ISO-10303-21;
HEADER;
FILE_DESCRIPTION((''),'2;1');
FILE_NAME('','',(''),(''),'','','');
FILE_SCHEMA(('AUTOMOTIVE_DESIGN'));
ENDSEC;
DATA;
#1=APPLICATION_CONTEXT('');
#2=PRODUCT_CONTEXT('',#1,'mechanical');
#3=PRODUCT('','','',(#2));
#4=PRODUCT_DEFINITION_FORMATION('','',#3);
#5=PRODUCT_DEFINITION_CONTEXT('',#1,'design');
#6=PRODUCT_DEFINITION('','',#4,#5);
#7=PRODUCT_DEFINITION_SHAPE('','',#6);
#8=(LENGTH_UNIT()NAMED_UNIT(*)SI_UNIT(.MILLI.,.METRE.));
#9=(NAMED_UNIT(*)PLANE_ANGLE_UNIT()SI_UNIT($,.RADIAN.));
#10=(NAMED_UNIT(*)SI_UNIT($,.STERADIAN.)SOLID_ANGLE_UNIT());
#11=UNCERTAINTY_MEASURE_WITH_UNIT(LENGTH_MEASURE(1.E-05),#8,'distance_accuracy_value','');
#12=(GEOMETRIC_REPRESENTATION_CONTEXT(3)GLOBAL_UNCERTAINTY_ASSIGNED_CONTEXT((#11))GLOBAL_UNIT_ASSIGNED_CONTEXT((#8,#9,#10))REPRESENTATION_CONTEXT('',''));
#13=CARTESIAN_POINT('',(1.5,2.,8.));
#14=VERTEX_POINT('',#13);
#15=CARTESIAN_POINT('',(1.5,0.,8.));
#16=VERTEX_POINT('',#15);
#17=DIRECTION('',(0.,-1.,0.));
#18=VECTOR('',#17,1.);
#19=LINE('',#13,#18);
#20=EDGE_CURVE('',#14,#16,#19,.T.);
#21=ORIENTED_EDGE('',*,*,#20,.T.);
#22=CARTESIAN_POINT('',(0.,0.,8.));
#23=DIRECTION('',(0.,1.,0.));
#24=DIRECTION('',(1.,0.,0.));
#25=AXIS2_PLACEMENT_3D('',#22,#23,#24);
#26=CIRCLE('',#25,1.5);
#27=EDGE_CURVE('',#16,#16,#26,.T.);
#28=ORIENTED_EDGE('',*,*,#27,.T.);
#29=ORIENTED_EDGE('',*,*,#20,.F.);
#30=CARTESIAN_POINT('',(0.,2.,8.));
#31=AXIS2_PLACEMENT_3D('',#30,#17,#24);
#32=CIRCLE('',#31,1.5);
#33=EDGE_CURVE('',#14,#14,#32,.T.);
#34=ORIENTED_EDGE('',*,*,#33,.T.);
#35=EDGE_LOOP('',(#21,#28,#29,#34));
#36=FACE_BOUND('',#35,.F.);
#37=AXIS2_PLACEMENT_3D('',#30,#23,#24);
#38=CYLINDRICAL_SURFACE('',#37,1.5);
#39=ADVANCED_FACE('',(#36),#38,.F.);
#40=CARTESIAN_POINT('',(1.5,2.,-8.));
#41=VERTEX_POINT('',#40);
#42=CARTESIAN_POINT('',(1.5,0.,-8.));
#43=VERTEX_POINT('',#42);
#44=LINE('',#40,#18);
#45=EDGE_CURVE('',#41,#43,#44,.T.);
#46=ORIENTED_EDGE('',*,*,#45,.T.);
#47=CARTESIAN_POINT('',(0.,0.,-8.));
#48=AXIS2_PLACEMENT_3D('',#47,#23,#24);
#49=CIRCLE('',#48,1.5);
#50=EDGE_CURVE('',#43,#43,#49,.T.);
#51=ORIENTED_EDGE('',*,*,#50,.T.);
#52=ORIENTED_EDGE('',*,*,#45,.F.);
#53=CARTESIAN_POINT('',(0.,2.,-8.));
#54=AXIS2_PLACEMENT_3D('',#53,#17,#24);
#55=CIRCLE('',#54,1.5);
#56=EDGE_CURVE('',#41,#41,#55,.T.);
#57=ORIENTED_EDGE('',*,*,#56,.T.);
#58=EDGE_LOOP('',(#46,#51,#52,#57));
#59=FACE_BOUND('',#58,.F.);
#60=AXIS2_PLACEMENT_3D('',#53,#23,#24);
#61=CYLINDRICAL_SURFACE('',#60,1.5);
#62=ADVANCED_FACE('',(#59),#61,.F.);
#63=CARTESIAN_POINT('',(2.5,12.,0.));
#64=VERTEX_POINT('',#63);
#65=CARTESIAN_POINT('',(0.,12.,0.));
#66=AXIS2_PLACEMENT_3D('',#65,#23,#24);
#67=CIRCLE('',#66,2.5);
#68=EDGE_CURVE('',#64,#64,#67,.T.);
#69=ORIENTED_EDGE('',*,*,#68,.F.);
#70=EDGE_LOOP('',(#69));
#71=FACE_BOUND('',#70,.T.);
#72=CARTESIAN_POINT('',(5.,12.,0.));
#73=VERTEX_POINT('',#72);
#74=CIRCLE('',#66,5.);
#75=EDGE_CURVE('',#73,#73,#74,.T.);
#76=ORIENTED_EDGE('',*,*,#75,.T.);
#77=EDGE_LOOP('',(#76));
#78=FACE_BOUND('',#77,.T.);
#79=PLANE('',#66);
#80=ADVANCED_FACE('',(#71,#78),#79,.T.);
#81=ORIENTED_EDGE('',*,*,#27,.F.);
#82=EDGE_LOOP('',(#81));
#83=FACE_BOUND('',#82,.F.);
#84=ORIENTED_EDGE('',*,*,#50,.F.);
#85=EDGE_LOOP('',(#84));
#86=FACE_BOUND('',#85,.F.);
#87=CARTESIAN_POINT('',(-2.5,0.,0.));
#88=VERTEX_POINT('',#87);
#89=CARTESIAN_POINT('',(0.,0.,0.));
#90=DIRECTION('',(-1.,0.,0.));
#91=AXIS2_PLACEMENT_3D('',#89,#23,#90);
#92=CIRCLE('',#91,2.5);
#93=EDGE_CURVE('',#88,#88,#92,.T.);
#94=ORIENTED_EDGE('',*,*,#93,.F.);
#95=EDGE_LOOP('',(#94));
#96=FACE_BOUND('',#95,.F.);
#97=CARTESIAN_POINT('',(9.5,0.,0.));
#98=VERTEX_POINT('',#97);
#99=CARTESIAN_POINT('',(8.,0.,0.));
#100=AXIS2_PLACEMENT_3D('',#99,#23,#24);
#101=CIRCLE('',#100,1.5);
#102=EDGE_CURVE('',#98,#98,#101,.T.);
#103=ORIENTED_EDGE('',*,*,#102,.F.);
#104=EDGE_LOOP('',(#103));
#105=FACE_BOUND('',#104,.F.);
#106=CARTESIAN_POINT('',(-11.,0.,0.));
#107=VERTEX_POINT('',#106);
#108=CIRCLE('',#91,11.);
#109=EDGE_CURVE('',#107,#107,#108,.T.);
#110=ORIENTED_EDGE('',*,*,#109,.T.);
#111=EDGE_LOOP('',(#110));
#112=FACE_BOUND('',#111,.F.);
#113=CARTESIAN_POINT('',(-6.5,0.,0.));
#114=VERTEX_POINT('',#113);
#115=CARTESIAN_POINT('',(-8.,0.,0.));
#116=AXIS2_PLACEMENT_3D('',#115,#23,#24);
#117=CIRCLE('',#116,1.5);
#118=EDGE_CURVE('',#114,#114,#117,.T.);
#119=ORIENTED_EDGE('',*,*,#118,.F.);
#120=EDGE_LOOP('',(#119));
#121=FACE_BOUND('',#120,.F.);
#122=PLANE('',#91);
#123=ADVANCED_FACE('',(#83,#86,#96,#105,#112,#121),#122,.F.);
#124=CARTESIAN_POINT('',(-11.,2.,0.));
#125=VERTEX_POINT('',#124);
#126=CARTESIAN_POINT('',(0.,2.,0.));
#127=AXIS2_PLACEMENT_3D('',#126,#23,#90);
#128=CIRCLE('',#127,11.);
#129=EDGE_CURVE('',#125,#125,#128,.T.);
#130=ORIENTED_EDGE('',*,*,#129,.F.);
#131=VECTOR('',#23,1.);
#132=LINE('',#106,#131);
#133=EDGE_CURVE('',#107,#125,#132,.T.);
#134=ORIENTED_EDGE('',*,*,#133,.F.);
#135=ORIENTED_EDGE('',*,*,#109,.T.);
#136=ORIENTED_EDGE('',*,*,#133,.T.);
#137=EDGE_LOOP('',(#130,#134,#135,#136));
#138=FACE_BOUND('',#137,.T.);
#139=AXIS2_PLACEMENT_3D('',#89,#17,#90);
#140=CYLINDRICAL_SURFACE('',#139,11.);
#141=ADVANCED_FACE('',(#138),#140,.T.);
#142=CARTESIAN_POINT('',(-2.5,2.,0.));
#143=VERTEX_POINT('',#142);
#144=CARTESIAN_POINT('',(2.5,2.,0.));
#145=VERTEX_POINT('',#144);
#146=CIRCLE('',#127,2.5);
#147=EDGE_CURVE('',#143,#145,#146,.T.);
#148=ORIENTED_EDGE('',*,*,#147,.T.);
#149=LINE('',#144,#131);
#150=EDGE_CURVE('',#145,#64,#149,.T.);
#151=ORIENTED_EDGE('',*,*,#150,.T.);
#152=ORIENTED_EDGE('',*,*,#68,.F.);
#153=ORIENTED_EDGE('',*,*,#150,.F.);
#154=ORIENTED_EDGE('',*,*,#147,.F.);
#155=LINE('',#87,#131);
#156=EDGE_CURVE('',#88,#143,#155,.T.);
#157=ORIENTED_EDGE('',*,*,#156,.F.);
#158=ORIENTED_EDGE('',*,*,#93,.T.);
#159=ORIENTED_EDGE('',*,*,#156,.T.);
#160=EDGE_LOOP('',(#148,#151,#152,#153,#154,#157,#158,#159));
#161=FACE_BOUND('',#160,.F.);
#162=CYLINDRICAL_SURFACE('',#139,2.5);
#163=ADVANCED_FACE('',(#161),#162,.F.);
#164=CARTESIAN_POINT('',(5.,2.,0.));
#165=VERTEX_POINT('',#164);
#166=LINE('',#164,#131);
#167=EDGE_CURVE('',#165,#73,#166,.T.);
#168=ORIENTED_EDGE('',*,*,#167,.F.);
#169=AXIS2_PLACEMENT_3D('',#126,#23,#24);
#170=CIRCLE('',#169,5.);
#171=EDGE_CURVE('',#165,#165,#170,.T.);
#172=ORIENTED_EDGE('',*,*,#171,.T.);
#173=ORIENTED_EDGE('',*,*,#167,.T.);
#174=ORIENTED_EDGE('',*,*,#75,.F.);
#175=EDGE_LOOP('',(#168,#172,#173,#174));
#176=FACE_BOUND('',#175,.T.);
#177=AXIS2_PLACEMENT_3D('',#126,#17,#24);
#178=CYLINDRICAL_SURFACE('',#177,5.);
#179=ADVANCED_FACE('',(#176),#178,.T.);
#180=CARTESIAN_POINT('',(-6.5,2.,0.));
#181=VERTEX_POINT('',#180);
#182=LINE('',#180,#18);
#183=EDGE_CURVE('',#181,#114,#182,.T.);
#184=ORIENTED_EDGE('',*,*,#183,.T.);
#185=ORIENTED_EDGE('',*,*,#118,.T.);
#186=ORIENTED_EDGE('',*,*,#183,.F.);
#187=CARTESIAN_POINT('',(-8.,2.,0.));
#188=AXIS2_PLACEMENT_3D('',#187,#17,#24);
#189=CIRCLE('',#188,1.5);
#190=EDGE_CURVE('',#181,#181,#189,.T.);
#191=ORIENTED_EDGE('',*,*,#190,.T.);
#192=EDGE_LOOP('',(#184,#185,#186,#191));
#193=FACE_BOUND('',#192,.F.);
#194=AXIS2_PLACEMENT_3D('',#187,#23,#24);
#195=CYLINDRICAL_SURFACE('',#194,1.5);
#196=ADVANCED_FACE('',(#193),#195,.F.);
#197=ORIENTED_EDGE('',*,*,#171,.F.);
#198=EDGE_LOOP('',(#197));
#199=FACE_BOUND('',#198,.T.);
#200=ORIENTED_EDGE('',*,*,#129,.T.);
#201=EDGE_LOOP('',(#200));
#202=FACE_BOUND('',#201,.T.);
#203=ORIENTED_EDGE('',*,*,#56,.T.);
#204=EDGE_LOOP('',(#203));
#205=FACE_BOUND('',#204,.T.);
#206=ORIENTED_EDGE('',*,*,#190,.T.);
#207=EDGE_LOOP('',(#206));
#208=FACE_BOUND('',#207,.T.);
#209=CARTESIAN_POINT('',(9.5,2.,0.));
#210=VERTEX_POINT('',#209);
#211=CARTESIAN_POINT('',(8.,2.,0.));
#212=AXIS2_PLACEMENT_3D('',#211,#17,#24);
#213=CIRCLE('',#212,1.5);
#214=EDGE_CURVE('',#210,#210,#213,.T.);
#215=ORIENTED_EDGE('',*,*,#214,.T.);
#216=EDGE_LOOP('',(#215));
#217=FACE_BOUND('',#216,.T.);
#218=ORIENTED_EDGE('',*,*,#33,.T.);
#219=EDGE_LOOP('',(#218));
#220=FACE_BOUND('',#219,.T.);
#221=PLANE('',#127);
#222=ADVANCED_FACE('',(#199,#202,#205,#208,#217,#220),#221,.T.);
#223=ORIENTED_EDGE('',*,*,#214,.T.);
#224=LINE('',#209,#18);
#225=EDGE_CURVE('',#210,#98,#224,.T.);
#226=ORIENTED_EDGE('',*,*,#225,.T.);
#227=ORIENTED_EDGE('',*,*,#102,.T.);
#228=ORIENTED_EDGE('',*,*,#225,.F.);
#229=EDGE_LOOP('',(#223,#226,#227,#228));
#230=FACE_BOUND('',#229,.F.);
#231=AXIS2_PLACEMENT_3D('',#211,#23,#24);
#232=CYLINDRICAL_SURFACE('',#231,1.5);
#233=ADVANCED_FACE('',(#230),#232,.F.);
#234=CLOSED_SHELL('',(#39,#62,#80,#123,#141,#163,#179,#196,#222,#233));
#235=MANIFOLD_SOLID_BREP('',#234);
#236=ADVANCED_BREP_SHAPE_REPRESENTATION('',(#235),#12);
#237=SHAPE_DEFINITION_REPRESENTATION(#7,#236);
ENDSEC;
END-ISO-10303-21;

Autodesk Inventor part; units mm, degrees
ref_plane "YZ Plane" through (0, 0, 0) normal (1, 0, 0) x (0, 1, 0)
ref_plane "XZ Plane" through (0, 0, 0) normal (0, 1, 0) x (-1, 0, 0)
ref_plane "XY Plane" through (0, 0, 0) normal (0, 0, 1) x (1, 0, 0)
sketch "Эскиз1" plane through (0, 0, 0) normal (0, 1, 0) x (-1, 0, 0)
  circle A0 centre (0, 0) radius 11
  circle A1 centre (0, 0) radius 2.5
  dimension "d0" = 22
  dimension "d1" = 5
extrude "Выдавливание1" add sketch "Эскиз1" along normal blind 2
sketch "Эскиз2" plane through (0, 2, 0) normal (0, 1, 0) x (1, 0, 0)
  circle A0 centre (0, 0) radius 5
  circle A1 centre (0, 0) radius 2.5
  dimension "d4" = 5
  dimension "d5" = 10
extrude "Выдавливание2" add sketch "Эскиз2" along normal blind 10
sketch "Эскиз3" plane through (0, 2, 0) normal (0, 1, 0) x (1, 0, 0)
  circle A0 centre (0, 0) radius 8
  circle A1 centre (8, 0) radius 1.5
  circle A2 centre (-8, 0) radius 1.5
  circle A3 centre (0, -8) radius 1.5
  circle A4 centre (0, 8) radius 1.5
  dimension "d8" = 16
  dimension "d9" = 3
  dimension "d10" = 3
  dimension "d11" = 3
  dimension "d12" = 3
extrude "Выдавливание3" cut sketch "Эскиз3" against normal blind 10 contours A0 A1 | A0 A1 | A4 A0 | A0 A4 | A3 A0 | A0 A3 | A2 A0 | A0 A2
properties part number "муфта"
